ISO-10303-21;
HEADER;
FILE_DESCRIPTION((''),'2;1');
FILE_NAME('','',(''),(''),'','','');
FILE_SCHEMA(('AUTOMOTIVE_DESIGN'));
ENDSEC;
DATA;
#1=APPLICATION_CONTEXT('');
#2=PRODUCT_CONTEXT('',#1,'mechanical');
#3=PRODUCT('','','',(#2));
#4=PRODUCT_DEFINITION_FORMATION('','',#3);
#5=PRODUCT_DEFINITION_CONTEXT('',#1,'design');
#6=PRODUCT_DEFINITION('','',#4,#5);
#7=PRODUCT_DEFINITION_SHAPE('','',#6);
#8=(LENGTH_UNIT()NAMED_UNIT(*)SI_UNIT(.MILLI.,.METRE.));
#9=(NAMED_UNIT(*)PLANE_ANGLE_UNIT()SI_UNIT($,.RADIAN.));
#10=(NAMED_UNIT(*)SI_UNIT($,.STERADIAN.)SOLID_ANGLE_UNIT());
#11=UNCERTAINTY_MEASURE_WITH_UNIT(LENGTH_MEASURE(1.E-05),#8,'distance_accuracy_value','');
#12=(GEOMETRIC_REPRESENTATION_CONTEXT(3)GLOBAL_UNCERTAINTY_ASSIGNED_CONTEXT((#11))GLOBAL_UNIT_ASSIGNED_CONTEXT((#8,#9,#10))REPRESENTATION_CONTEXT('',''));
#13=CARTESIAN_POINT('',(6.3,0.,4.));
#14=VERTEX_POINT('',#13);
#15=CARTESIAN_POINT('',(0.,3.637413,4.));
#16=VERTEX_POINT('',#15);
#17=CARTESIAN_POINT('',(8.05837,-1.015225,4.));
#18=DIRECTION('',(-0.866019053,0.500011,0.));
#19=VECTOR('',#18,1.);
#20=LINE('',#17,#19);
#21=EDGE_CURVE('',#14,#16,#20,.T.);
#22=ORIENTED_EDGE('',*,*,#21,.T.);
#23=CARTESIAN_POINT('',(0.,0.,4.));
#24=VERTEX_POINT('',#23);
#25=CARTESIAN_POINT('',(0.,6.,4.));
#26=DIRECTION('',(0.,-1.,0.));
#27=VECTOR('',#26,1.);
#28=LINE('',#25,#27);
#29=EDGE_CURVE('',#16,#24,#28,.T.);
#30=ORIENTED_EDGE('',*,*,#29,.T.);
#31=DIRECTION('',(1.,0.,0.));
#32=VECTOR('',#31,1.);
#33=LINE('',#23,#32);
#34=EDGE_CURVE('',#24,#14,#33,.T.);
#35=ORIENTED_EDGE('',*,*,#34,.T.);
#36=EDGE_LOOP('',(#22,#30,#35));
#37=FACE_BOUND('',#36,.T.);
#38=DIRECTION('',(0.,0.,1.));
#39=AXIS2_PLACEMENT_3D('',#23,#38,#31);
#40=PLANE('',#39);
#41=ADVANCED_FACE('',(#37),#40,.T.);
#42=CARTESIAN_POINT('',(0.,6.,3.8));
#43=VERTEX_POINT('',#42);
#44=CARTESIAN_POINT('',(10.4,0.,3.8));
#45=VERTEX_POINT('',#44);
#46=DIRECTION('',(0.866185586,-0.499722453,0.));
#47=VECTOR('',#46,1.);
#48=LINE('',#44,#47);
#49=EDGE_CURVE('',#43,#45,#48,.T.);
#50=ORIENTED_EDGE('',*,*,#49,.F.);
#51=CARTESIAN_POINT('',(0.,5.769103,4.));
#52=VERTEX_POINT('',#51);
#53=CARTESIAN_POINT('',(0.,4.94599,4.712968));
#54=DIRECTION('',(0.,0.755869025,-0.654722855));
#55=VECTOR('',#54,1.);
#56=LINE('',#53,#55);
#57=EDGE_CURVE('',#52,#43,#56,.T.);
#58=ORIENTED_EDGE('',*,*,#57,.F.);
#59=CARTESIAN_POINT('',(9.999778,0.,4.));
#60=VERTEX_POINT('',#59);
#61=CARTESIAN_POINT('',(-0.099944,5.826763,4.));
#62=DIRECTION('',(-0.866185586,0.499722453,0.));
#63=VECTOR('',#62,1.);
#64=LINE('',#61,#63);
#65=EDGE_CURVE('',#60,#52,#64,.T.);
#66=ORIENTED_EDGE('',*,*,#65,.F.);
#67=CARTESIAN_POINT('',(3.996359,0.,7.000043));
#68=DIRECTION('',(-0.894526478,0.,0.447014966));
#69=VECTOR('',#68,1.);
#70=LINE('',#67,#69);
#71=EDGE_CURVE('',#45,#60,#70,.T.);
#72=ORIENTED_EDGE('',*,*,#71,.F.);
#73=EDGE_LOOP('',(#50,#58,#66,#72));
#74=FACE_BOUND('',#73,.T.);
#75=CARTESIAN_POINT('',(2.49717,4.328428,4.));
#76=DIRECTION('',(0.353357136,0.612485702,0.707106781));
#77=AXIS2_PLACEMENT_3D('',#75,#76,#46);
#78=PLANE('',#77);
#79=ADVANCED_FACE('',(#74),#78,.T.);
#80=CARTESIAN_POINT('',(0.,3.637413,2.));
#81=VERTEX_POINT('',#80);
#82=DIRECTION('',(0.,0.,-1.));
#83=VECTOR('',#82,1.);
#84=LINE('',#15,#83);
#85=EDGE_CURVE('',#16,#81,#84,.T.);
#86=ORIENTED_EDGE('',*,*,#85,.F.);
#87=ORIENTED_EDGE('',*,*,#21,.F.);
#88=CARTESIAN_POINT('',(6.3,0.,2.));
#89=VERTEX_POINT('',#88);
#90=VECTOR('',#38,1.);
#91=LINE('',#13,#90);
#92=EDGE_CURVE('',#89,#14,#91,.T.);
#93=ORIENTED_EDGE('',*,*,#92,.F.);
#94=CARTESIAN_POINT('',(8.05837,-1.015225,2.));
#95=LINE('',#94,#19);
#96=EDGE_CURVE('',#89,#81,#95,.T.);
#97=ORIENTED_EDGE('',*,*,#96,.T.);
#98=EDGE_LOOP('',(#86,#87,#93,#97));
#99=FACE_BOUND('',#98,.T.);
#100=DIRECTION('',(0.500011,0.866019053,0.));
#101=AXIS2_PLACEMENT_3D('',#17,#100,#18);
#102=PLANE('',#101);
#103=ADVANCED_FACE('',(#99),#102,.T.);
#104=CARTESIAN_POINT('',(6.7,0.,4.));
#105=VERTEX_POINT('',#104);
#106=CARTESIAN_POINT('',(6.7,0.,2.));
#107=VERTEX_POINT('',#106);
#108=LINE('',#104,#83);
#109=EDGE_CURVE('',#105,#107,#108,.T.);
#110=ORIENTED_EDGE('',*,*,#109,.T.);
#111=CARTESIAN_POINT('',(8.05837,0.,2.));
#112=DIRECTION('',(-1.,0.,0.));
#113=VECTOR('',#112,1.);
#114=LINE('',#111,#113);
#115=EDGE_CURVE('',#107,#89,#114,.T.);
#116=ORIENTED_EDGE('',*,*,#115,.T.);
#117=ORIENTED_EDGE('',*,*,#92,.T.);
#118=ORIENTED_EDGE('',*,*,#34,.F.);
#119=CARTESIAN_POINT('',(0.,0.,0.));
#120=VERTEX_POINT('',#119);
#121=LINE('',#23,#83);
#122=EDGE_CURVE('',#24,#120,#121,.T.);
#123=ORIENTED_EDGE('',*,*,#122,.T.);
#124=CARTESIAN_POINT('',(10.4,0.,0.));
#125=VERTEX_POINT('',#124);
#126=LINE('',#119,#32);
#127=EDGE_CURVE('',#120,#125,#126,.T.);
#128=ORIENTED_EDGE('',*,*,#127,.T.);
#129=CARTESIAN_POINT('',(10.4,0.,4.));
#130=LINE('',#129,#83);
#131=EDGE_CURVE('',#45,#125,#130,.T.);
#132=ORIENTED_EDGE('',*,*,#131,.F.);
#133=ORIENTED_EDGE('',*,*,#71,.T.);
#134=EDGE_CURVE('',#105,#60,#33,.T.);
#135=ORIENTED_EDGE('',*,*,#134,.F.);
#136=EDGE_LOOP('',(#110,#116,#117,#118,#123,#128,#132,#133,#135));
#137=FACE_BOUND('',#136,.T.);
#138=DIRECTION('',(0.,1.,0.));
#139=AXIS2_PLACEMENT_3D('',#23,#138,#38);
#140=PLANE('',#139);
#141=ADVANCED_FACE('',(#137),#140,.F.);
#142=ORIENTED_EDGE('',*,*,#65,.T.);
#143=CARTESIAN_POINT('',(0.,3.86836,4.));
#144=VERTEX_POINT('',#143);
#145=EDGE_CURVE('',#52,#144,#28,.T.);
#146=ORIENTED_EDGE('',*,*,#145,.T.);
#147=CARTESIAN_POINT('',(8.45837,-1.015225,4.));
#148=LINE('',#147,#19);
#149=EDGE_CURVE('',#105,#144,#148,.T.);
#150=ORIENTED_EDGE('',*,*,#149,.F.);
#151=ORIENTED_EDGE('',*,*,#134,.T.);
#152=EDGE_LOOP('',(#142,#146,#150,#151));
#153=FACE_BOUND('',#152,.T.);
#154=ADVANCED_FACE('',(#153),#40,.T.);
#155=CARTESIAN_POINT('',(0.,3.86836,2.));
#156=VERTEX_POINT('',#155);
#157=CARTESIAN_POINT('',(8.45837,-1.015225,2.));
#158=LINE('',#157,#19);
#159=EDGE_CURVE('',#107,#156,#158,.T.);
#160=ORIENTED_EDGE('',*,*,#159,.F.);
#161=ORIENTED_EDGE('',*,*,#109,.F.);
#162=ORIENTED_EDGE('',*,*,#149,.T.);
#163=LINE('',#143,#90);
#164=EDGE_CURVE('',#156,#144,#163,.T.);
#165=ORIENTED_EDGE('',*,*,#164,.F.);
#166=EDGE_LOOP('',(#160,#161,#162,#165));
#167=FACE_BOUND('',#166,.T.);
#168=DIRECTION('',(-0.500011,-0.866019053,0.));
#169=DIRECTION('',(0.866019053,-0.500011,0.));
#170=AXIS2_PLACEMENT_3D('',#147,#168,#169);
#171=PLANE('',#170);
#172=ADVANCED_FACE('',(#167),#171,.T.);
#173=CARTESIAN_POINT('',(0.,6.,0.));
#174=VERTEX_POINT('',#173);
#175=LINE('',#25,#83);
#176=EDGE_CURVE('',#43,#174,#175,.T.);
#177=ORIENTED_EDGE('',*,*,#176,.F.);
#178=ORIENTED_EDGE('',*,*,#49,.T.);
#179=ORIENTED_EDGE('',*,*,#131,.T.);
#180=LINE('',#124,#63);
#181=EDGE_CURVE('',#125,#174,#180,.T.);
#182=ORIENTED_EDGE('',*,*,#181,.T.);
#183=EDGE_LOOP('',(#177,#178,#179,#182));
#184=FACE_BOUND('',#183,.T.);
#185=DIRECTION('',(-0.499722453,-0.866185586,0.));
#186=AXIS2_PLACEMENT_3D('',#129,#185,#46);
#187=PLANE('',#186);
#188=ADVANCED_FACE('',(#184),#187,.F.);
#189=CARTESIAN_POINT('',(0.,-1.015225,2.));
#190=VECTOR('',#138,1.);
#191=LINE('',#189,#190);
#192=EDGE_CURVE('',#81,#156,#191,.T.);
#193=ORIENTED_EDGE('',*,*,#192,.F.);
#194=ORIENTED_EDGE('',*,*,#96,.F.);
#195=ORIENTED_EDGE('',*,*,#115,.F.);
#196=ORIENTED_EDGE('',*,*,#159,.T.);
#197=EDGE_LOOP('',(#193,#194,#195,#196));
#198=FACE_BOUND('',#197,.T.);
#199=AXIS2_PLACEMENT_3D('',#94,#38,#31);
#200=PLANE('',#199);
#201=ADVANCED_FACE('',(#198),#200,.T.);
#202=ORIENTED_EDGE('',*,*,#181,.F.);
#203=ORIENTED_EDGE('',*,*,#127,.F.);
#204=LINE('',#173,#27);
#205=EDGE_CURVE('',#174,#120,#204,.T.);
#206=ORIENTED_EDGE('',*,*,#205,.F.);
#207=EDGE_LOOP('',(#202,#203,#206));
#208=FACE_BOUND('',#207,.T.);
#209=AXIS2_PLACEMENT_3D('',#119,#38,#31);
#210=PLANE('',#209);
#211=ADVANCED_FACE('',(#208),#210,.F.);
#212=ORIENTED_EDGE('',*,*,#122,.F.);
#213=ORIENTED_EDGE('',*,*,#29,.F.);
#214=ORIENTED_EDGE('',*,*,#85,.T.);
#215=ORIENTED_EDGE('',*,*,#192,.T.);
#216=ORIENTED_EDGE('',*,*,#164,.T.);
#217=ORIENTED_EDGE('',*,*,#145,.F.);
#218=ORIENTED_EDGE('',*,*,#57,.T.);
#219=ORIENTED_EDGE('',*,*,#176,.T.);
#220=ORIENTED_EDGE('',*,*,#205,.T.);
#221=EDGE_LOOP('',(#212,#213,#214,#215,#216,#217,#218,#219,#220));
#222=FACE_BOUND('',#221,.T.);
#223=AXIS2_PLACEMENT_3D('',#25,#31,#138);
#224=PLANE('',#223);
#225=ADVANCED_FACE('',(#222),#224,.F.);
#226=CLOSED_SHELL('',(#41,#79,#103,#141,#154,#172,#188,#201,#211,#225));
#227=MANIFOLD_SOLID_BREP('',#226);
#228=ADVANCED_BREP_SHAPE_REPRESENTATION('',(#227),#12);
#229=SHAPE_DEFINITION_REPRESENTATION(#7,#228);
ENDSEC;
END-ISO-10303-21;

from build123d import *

# Parameters (mm, degrees)
BOSS_EXTRUDE1_DEPTH  = 4
CUT_SWEEP1_START     = 3.150069302
CUT_SWEEP1_OUTLINE_W = 8
CUT_SWEEP1_OUTLINE_H = 2
CUT_SWEEP1_DEPTH     = 0.2000044
CHAMFER1_SIZE        = 0.2


# Read off the part's stored shape, not the designer's step: Cut-Sweep1
with BuildPart() as part:
    # Sketch1 → Boss-Extrude1 (new body)
    with BuildSketch(Plane.XY):
        Polygon((0, 0), (10.4, 0), (0, 6), align=None)
    extrude(amount=BOSS_EXTRUDE1_DEPTH)

    # Cut-Sweep1 outline → Cut-Sweep1 (cut)
    with BuildSketch(Plane(origin=(0, 0, 0), x_dir=(0.866019052628739, -0.5000110003630132, 0), z_dir=(0.5000110003630132, 0.8660190526287392, 0)).offset(CUT_SWEEP1_START)):
        with Locations((2, -3)):
            Rectangle(CUT_SWEEP1_OUTLINE_W, CUT_SWEEP1_OUTLINE_H)
    extrude(amount=CUT_SWEEP1_DEPTH, mode=Mode.SUBTRACT)

    # Chamfer1
    chamfer1_edges = [part.edges().sort_by_distance(p)[0] for p in [
        (5.2, 3, 4),
    ]]
    chamfer(chamfer1_edges, length=CHAMFER1_SIZE)


solid = part.part
